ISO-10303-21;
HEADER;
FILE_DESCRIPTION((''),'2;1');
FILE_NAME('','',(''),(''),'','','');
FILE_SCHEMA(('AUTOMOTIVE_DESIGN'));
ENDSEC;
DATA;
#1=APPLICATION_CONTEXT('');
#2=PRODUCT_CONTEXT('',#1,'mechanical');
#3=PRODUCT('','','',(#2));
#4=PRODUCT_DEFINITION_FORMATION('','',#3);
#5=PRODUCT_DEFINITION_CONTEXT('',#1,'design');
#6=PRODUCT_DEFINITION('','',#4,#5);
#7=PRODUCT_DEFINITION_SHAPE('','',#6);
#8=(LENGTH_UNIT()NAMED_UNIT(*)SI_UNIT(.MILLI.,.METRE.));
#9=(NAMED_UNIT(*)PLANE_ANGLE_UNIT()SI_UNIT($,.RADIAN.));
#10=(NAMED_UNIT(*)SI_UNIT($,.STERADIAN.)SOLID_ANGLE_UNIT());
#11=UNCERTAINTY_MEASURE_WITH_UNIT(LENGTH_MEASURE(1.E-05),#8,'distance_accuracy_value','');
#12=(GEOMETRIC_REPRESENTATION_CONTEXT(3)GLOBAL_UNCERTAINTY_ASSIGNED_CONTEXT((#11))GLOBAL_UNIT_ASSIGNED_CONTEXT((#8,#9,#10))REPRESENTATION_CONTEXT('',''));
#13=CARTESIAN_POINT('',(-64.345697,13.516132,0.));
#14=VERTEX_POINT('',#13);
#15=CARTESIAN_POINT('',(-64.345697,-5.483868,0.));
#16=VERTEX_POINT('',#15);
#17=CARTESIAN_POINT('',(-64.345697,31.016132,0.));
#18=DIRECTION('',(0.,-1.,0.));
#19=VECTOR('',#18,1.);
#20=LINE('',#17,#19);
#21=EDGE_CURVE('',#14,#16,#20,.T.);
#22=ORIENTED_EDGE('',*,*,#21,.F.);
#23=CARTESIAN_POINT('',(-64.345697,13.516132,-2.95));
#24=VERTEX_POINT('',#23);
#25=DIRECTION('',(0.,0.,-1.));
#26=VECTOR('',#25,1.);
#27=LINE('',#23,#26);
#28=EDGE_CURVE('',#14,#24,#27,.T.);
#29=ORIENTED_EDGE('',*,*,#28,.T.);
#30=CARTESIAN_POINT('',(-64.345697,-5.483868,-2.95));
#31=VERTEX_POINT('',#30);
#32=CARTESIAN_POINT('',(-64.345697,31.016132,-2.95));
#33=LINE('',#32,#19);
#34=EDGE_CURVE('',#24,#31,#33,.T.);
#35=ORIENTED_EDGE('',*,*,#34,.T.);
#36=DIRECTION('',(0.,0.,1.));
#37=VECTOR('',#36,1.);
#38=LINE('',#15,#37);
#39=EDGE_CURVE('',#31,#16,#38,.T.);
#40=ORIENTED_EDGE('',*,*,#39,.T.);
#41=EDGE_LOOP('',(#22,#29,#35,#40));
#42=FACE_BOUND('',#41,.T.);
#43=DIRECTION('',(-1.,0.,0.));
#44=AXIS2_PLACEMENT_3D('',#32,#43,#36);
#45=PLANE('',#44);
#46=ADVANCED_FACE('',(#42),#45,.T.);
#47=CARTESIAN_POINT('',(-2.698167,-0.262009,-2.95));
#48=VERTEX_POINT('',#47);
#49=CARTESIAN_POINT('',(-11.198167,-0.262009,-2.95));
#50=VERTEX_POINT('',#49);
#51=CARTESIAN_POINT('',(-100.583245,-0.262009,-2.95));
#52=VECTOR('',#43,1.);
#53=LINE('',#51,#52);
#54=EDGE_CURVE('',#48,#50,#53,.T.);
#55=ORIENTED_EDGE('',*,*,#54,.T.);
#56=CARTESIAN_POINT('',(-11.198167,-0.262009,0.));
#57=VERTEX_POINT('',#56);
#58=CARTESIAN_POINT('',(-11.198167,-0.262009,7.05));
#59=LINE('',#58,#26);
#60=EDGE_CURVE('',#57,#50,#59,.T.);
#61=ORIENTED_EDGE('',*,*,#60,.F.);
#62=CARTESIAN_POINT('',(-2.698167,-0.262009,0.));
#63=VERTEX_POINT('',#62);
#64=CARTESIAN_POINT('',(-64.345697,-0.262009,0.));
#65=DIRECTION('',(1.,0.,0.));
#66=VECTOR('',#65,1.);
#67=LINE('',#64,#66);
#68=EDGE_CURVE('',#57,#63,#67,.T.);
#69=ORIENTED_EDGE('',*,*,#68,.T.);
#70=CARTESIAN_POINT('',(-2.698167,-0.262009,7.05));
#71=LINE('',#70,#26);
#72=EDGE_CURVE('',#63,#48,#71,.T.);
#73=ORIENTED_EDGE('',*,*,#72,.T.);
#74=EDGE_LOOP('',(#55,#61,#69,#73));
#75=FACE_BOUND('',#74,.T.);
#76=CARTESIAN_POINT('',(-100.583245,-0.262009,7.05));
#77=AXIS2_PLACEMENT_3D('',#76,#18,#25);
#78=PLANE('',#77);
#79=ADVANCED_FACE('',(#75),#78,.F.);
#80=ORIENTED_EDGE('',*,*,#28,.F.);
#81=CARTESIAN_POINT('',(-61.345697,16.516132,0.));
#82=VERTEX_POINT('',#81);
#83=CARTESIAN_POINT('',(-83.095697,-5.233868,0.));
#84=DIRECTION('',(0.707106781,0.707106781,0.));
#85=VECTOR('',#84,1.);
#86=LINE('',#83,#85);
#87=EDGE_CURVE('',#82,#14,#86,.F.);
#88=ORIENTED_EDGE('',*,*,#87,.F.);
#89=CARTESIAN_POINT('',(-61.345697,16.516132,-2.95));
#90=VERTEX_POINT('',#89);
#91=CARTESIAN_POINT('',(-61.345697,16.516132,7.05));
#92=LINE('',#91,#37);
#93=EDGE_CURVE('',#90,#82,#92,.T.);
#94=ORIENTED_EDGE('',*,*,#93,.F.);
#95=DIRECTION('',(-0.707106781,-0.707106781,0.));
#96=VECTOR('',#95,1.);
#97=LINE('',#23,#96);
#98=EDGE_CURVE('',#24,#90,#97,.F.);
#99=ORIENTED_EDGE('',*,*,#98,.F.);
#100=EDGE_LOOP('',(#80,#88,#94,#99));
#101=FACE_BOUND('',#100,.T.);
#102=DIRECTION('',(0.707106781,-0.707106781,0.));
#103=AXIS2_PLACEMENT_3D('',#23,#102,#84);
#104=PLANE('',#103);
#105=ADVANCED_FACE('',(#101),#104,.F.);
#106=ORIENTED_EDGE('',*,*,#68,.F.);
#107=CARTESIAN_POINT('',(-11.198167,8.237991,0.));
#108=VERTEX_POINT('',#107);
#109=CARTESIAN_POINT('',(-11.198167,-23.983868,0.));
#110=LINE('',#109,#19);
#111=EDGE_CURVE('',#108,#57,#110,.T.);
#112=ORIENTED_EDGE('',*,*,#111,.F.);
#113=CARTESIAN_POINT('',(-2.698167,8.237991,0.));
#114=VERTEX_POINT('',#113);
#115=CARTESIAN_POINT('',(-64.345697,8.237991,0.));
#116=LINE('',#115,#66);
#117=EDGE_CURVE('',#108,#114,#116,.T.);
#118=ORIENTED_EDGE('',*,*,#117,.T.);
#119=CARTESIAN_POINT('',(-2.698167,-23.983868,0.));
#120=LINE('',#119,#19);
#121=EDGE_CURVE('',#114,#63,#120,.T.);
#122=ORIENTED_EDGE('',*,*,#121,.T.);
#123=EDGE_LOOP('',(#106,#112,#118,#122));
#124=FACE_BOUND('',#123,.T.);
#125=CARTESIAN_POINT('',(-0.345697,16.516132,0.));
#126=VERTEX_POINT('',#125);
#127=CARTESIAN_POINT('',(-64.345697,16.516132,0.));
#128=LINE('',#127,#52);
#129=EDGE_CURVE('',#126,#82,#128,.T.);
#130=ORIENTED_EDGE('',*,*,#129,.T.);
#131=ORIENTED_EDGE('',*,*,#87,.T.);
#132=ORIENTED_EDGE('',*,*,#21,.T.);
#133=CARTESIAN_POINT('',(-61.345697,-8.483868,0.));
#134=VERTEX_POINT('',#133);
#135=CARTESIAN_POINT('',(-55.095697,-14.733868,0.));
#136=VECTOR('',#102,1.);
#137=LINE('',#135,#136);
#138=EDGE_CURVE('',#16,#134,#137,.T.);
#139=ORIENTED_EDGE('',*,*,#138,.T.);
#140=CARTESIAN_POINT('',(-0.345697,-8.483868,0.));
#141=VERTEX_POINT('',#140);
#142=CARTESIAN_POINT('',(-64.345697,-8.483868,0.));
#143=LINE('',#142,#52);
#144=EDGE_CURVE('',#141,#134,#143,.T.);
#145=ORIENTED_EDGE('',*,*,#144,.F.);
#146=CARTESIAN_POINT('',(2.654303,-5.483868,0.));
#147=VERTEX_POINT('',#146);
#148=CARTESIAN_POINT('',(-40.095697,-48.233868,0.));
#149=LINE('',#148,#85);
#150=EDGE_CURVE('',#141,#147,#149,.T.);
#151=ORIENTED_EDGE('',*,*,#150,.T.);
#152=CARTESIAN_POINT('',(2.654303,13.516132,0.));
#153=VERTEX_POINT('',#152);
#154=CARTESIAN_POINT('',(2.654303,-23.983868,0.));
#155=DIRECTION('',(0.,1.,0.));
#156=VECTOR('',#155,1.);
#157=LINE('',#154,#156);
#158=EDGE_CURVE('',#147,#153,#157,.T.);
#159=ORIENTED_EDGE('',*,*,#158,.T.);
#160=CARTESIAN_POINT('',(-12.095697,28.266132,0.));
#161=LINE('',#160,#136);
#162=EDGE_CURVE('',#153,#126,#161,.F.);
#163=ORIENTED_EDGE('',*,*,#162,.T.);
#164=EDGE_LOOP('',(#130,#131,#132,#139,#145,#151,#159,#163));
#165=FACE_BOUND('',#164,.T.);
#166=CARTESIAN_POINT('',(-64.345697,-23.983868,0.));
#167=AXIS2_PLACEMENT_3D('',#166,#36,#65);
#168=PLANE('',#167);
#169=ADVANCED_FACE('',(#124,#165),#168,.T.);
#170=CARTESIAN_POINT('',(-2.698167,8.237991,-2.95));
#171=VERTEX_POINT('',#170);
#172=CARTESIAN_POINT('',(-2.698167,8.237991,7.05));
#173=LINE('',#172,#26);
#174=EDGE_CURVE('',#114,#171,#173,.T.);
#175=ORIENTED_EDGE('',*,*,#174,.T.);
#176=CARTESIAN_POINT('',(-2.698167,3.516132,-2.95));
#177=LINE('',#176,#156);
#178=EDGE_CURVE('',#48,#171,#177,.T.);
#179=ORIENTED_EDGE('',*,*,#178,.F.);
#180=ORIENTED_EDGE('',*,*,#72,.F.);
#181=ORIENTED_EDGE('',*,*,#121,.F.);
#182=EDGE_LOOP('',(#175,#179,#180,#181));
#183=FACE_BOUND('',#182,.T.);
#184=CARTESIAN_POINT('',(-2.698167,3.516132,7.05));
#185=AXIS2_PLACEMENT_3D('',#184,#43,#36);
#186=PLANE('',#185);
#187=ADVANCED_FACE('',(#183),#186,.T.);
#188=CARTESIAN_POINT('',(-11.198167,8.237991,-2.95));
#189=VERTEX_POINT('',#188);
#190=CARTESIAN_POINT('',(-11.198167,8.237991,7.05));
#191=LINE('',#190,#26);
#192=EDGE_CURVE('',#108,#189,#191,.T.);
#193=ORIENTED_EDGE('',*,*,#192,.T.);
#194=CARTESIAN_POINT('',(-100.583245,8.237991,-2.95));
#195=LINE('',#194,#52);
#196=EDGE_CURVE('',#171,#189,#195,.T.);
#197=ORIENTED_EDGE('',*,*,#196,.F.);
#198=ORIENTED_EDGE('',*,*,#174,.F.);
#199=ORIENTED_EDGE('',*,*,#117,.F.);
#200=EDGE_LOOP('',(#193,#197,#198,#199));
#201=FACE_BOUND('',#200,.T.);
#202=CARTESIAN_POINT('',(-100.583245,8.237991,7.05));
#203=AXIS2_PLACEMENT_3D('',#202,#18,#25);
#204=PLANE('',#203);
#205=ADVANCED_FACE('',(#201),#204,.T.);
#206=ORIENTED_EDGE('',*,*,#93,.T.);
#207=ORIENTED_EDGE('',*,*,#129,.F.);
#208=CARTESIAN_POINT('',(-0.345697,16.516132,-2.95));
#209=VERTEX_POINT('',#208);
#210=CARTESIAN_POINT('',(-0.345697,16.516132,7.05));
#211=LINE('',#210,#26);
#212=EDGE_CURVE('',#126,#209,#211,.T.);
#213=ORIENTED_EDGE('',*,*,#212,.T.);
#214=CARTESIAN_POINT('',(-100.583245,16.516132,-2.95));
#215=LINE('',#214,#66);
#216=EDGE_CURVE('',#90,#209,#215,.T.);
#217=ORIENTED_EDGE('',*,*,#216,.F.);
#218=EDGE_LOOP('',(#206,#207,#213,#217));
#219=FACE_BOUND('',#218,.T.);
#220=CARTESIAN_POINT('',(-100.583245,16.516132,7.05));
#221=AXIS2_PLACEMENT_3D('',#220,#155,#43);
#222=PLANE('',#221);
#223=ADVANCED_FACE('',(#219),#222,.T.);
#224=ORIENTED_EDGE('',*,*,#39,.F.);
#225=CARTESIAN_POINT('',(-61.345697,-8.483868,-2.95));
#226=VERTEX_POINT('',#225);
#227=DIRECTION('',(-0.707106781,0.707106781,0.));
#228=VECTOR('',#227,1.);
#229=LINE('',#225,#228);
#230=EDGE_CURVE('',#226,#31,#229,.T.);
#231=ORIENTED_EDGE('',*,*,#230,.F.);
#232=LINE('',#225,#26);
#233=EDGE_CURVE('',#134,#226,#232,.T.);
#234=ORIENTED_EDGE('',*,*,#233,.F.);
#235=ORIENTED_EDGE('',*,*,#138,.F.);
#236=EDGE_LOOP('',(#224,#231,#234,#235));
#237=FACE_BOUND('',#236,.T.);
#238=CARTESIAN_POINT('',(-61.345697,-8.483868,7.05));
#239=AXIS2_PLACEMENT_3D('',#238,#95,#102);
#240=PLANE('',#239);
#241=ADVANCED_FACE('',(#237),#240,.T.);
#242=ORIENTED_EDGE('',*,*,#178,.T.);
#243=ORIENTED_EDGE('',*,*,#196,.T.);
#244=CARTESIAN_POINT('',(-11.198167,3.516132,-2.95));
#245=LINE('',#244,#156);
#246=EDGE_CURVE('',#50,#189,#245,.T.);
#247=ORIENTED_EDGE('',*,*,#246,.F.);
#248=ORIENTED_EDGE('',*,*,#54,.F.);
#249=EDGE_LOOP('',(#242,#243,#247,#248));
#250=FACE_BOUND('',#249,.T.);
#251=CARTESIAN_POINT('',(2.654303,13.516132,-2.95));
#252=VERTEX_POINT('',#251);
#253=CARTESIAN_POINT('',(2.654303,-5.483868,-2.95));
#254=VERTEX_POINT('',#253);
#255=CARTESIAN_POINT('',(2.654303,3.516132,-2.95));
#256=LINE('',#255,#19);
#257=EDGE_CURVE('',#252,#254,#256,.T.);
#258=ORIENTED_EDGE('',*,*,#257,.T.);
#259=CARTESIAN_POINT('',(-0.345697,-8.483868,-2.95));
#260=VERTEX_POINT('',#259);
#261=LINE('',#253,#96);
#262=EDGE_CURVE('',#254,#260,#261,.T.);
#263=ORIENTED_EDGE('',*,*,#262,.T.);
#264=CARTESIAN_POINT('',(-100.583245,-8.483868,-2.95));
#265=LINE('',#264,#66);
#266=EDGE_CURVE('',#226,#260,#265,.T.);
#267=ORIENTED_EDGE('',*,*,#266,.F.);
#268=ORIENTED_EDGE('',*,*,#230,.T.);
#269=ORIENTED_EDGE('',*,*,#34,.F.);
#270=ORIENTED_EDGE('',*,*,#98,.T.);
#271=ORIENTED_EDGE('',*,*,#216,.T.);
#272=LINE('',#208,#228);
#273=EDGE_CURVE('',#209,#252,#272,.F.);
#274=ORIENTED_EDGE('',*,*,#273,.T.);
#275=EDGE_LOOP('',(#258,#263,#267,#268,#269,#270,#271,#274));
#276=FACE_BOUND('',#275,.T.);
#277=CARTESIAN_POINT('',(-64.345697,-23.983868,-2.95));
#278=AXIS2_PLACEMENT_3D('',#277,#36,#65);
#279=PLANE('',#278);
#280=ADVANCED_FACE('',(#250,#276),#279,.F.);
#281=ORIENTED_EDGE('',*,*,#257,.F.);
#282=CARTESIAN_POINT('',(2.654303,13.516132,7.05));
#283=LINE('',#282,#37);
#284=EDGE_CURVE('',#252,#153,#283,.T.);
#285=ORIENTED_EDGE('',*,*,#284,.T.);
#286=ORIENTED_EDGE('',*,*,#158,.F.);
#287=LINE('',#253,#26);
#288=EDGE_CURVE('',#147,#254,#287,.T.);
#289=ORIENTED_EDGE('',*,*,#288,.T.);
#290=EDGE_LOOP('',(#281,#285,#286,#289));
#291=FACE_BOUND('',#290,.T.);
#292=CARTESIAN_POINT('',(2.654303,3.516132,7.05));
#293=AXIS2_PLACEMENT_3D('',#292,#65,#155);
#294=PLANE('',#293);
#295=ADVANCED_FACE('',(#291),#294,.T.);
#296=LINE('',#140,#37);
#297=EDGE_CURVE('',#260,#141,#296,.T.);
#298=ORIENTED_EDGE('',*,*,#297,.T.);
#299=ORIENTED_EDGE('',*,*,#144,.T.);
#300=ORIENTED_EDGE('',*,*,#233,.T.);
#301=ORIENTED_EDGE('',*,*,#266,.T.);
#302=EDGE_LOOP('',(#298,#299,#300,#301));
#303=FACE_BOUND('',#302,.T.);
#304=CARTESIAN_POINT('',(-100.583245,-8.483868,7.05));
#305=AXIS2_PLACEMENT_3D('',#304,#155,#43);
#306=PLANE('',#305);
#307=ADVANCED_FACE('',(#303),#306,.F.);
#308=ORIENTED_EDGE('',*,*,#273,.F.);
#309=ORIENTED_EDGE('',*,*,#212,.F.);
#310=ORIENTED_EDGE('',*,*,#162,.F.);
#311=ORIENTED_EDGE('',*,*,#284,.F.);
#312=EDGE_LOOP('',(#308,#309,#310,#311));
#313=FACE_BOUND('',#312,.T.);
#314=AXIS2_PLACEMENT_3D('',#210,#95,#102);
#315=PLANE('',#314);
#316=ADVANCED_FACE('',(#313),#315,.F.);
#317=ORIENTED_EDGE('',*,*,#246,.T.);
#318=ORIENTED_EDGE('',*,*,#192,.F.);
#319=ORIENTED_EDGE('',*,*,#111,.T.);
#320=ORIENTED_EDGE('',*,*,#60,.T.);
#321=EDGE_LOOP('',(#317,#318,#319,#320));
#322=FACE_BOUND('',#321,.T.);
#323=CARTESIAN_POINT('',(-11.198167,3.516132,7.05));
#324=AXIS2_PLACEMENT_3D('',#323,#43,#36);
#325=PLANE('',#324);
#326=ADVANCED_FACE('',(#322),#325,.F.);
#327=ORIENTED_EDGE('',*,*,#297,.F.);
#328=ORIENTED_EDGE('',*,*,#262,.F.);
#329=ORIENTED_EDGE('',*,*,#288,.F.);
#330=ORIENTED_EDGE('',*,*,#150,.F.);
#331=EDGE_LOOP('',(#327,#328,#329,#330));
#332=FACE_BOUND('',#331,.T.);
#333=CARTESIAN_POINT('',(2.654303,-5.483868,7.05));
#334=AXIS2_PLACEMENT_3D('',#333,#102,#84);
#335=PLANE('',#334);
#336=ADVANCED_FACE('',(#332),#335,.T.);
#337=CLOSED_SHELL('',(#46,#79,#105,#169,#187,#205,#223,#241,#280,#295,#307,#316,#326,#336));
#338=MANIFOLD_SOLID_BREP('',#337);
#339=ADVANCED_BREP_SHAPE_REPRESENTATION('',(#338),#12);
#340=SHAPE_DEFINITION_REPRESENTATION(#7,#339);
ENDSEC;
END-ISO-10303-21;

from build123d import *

# Parameters (mm, degrees)
SKETCH_1_W             = 84
SKETCH_1_H             = 55
SM_BASE_FLANGE_1_DEPTH = 2.95
SKETCH_5_W             = 8.5
SKETCH_5_H             = 8.5
CUT_EXTRUDE_1_DEPTH    = 10
CHAMFER_1_SIZE         = 3


# Sheet-metal steps are written as plain solids
with BuildPart() as part:
    # Sketch 1 → Базовая кромка1 (new body)
    with BuildSketch(Plane.XY):
        with Locations((-22.345696863, 3.516131621)):
            Rectangle(SKETCH_1_W, SKETCH_1_H)
    extrude(amount=-SM_BASE_FLANGE_1_DEPTH)

    # Эскиз5 → Вырез-Вытянуть1 (cut)
    with BuildSketch(Plane(origin=(0, 0, -2.95), x_dir=(-1, 0, 0), z_dir=(0, 0, -1))):
        Polygon((64.345696863, -23.983868379), (64.345696863, -8.483868379), (-2.654303137, -8.483868379), (-2.654303137, 16.516131621), (64.345696863, 16.516131621), (64.345696863, 31.016131621), (-19.654303137, 31.016131621), (-19.654303137, -23.983868379), align=None)
        with Locations((6.948166656, 3.987990807)):
            Rectangle(SKETCH_5_W, SKETCH_5_H)
    extrude(amount=-CUT_EXTRUDE_1_DEPTH, mode=Mode.SUBTRACT)

    # Фаска1
    chamfer_1_edges = [part.edges().sort_by_distance(p)[0] for p in [
        (2.654303137, 16.516131621, -1.475),
        (2.654303137, -8.483868379, -1.475),
        (-64.345696863, -8.483868379, -1.475),
        (-64.345696863, 16.516131621, -1.475),
    ]]
    chamfer(chamfer_1_edges, length=CHAMFER_1_SIZE)


solid = part.part
